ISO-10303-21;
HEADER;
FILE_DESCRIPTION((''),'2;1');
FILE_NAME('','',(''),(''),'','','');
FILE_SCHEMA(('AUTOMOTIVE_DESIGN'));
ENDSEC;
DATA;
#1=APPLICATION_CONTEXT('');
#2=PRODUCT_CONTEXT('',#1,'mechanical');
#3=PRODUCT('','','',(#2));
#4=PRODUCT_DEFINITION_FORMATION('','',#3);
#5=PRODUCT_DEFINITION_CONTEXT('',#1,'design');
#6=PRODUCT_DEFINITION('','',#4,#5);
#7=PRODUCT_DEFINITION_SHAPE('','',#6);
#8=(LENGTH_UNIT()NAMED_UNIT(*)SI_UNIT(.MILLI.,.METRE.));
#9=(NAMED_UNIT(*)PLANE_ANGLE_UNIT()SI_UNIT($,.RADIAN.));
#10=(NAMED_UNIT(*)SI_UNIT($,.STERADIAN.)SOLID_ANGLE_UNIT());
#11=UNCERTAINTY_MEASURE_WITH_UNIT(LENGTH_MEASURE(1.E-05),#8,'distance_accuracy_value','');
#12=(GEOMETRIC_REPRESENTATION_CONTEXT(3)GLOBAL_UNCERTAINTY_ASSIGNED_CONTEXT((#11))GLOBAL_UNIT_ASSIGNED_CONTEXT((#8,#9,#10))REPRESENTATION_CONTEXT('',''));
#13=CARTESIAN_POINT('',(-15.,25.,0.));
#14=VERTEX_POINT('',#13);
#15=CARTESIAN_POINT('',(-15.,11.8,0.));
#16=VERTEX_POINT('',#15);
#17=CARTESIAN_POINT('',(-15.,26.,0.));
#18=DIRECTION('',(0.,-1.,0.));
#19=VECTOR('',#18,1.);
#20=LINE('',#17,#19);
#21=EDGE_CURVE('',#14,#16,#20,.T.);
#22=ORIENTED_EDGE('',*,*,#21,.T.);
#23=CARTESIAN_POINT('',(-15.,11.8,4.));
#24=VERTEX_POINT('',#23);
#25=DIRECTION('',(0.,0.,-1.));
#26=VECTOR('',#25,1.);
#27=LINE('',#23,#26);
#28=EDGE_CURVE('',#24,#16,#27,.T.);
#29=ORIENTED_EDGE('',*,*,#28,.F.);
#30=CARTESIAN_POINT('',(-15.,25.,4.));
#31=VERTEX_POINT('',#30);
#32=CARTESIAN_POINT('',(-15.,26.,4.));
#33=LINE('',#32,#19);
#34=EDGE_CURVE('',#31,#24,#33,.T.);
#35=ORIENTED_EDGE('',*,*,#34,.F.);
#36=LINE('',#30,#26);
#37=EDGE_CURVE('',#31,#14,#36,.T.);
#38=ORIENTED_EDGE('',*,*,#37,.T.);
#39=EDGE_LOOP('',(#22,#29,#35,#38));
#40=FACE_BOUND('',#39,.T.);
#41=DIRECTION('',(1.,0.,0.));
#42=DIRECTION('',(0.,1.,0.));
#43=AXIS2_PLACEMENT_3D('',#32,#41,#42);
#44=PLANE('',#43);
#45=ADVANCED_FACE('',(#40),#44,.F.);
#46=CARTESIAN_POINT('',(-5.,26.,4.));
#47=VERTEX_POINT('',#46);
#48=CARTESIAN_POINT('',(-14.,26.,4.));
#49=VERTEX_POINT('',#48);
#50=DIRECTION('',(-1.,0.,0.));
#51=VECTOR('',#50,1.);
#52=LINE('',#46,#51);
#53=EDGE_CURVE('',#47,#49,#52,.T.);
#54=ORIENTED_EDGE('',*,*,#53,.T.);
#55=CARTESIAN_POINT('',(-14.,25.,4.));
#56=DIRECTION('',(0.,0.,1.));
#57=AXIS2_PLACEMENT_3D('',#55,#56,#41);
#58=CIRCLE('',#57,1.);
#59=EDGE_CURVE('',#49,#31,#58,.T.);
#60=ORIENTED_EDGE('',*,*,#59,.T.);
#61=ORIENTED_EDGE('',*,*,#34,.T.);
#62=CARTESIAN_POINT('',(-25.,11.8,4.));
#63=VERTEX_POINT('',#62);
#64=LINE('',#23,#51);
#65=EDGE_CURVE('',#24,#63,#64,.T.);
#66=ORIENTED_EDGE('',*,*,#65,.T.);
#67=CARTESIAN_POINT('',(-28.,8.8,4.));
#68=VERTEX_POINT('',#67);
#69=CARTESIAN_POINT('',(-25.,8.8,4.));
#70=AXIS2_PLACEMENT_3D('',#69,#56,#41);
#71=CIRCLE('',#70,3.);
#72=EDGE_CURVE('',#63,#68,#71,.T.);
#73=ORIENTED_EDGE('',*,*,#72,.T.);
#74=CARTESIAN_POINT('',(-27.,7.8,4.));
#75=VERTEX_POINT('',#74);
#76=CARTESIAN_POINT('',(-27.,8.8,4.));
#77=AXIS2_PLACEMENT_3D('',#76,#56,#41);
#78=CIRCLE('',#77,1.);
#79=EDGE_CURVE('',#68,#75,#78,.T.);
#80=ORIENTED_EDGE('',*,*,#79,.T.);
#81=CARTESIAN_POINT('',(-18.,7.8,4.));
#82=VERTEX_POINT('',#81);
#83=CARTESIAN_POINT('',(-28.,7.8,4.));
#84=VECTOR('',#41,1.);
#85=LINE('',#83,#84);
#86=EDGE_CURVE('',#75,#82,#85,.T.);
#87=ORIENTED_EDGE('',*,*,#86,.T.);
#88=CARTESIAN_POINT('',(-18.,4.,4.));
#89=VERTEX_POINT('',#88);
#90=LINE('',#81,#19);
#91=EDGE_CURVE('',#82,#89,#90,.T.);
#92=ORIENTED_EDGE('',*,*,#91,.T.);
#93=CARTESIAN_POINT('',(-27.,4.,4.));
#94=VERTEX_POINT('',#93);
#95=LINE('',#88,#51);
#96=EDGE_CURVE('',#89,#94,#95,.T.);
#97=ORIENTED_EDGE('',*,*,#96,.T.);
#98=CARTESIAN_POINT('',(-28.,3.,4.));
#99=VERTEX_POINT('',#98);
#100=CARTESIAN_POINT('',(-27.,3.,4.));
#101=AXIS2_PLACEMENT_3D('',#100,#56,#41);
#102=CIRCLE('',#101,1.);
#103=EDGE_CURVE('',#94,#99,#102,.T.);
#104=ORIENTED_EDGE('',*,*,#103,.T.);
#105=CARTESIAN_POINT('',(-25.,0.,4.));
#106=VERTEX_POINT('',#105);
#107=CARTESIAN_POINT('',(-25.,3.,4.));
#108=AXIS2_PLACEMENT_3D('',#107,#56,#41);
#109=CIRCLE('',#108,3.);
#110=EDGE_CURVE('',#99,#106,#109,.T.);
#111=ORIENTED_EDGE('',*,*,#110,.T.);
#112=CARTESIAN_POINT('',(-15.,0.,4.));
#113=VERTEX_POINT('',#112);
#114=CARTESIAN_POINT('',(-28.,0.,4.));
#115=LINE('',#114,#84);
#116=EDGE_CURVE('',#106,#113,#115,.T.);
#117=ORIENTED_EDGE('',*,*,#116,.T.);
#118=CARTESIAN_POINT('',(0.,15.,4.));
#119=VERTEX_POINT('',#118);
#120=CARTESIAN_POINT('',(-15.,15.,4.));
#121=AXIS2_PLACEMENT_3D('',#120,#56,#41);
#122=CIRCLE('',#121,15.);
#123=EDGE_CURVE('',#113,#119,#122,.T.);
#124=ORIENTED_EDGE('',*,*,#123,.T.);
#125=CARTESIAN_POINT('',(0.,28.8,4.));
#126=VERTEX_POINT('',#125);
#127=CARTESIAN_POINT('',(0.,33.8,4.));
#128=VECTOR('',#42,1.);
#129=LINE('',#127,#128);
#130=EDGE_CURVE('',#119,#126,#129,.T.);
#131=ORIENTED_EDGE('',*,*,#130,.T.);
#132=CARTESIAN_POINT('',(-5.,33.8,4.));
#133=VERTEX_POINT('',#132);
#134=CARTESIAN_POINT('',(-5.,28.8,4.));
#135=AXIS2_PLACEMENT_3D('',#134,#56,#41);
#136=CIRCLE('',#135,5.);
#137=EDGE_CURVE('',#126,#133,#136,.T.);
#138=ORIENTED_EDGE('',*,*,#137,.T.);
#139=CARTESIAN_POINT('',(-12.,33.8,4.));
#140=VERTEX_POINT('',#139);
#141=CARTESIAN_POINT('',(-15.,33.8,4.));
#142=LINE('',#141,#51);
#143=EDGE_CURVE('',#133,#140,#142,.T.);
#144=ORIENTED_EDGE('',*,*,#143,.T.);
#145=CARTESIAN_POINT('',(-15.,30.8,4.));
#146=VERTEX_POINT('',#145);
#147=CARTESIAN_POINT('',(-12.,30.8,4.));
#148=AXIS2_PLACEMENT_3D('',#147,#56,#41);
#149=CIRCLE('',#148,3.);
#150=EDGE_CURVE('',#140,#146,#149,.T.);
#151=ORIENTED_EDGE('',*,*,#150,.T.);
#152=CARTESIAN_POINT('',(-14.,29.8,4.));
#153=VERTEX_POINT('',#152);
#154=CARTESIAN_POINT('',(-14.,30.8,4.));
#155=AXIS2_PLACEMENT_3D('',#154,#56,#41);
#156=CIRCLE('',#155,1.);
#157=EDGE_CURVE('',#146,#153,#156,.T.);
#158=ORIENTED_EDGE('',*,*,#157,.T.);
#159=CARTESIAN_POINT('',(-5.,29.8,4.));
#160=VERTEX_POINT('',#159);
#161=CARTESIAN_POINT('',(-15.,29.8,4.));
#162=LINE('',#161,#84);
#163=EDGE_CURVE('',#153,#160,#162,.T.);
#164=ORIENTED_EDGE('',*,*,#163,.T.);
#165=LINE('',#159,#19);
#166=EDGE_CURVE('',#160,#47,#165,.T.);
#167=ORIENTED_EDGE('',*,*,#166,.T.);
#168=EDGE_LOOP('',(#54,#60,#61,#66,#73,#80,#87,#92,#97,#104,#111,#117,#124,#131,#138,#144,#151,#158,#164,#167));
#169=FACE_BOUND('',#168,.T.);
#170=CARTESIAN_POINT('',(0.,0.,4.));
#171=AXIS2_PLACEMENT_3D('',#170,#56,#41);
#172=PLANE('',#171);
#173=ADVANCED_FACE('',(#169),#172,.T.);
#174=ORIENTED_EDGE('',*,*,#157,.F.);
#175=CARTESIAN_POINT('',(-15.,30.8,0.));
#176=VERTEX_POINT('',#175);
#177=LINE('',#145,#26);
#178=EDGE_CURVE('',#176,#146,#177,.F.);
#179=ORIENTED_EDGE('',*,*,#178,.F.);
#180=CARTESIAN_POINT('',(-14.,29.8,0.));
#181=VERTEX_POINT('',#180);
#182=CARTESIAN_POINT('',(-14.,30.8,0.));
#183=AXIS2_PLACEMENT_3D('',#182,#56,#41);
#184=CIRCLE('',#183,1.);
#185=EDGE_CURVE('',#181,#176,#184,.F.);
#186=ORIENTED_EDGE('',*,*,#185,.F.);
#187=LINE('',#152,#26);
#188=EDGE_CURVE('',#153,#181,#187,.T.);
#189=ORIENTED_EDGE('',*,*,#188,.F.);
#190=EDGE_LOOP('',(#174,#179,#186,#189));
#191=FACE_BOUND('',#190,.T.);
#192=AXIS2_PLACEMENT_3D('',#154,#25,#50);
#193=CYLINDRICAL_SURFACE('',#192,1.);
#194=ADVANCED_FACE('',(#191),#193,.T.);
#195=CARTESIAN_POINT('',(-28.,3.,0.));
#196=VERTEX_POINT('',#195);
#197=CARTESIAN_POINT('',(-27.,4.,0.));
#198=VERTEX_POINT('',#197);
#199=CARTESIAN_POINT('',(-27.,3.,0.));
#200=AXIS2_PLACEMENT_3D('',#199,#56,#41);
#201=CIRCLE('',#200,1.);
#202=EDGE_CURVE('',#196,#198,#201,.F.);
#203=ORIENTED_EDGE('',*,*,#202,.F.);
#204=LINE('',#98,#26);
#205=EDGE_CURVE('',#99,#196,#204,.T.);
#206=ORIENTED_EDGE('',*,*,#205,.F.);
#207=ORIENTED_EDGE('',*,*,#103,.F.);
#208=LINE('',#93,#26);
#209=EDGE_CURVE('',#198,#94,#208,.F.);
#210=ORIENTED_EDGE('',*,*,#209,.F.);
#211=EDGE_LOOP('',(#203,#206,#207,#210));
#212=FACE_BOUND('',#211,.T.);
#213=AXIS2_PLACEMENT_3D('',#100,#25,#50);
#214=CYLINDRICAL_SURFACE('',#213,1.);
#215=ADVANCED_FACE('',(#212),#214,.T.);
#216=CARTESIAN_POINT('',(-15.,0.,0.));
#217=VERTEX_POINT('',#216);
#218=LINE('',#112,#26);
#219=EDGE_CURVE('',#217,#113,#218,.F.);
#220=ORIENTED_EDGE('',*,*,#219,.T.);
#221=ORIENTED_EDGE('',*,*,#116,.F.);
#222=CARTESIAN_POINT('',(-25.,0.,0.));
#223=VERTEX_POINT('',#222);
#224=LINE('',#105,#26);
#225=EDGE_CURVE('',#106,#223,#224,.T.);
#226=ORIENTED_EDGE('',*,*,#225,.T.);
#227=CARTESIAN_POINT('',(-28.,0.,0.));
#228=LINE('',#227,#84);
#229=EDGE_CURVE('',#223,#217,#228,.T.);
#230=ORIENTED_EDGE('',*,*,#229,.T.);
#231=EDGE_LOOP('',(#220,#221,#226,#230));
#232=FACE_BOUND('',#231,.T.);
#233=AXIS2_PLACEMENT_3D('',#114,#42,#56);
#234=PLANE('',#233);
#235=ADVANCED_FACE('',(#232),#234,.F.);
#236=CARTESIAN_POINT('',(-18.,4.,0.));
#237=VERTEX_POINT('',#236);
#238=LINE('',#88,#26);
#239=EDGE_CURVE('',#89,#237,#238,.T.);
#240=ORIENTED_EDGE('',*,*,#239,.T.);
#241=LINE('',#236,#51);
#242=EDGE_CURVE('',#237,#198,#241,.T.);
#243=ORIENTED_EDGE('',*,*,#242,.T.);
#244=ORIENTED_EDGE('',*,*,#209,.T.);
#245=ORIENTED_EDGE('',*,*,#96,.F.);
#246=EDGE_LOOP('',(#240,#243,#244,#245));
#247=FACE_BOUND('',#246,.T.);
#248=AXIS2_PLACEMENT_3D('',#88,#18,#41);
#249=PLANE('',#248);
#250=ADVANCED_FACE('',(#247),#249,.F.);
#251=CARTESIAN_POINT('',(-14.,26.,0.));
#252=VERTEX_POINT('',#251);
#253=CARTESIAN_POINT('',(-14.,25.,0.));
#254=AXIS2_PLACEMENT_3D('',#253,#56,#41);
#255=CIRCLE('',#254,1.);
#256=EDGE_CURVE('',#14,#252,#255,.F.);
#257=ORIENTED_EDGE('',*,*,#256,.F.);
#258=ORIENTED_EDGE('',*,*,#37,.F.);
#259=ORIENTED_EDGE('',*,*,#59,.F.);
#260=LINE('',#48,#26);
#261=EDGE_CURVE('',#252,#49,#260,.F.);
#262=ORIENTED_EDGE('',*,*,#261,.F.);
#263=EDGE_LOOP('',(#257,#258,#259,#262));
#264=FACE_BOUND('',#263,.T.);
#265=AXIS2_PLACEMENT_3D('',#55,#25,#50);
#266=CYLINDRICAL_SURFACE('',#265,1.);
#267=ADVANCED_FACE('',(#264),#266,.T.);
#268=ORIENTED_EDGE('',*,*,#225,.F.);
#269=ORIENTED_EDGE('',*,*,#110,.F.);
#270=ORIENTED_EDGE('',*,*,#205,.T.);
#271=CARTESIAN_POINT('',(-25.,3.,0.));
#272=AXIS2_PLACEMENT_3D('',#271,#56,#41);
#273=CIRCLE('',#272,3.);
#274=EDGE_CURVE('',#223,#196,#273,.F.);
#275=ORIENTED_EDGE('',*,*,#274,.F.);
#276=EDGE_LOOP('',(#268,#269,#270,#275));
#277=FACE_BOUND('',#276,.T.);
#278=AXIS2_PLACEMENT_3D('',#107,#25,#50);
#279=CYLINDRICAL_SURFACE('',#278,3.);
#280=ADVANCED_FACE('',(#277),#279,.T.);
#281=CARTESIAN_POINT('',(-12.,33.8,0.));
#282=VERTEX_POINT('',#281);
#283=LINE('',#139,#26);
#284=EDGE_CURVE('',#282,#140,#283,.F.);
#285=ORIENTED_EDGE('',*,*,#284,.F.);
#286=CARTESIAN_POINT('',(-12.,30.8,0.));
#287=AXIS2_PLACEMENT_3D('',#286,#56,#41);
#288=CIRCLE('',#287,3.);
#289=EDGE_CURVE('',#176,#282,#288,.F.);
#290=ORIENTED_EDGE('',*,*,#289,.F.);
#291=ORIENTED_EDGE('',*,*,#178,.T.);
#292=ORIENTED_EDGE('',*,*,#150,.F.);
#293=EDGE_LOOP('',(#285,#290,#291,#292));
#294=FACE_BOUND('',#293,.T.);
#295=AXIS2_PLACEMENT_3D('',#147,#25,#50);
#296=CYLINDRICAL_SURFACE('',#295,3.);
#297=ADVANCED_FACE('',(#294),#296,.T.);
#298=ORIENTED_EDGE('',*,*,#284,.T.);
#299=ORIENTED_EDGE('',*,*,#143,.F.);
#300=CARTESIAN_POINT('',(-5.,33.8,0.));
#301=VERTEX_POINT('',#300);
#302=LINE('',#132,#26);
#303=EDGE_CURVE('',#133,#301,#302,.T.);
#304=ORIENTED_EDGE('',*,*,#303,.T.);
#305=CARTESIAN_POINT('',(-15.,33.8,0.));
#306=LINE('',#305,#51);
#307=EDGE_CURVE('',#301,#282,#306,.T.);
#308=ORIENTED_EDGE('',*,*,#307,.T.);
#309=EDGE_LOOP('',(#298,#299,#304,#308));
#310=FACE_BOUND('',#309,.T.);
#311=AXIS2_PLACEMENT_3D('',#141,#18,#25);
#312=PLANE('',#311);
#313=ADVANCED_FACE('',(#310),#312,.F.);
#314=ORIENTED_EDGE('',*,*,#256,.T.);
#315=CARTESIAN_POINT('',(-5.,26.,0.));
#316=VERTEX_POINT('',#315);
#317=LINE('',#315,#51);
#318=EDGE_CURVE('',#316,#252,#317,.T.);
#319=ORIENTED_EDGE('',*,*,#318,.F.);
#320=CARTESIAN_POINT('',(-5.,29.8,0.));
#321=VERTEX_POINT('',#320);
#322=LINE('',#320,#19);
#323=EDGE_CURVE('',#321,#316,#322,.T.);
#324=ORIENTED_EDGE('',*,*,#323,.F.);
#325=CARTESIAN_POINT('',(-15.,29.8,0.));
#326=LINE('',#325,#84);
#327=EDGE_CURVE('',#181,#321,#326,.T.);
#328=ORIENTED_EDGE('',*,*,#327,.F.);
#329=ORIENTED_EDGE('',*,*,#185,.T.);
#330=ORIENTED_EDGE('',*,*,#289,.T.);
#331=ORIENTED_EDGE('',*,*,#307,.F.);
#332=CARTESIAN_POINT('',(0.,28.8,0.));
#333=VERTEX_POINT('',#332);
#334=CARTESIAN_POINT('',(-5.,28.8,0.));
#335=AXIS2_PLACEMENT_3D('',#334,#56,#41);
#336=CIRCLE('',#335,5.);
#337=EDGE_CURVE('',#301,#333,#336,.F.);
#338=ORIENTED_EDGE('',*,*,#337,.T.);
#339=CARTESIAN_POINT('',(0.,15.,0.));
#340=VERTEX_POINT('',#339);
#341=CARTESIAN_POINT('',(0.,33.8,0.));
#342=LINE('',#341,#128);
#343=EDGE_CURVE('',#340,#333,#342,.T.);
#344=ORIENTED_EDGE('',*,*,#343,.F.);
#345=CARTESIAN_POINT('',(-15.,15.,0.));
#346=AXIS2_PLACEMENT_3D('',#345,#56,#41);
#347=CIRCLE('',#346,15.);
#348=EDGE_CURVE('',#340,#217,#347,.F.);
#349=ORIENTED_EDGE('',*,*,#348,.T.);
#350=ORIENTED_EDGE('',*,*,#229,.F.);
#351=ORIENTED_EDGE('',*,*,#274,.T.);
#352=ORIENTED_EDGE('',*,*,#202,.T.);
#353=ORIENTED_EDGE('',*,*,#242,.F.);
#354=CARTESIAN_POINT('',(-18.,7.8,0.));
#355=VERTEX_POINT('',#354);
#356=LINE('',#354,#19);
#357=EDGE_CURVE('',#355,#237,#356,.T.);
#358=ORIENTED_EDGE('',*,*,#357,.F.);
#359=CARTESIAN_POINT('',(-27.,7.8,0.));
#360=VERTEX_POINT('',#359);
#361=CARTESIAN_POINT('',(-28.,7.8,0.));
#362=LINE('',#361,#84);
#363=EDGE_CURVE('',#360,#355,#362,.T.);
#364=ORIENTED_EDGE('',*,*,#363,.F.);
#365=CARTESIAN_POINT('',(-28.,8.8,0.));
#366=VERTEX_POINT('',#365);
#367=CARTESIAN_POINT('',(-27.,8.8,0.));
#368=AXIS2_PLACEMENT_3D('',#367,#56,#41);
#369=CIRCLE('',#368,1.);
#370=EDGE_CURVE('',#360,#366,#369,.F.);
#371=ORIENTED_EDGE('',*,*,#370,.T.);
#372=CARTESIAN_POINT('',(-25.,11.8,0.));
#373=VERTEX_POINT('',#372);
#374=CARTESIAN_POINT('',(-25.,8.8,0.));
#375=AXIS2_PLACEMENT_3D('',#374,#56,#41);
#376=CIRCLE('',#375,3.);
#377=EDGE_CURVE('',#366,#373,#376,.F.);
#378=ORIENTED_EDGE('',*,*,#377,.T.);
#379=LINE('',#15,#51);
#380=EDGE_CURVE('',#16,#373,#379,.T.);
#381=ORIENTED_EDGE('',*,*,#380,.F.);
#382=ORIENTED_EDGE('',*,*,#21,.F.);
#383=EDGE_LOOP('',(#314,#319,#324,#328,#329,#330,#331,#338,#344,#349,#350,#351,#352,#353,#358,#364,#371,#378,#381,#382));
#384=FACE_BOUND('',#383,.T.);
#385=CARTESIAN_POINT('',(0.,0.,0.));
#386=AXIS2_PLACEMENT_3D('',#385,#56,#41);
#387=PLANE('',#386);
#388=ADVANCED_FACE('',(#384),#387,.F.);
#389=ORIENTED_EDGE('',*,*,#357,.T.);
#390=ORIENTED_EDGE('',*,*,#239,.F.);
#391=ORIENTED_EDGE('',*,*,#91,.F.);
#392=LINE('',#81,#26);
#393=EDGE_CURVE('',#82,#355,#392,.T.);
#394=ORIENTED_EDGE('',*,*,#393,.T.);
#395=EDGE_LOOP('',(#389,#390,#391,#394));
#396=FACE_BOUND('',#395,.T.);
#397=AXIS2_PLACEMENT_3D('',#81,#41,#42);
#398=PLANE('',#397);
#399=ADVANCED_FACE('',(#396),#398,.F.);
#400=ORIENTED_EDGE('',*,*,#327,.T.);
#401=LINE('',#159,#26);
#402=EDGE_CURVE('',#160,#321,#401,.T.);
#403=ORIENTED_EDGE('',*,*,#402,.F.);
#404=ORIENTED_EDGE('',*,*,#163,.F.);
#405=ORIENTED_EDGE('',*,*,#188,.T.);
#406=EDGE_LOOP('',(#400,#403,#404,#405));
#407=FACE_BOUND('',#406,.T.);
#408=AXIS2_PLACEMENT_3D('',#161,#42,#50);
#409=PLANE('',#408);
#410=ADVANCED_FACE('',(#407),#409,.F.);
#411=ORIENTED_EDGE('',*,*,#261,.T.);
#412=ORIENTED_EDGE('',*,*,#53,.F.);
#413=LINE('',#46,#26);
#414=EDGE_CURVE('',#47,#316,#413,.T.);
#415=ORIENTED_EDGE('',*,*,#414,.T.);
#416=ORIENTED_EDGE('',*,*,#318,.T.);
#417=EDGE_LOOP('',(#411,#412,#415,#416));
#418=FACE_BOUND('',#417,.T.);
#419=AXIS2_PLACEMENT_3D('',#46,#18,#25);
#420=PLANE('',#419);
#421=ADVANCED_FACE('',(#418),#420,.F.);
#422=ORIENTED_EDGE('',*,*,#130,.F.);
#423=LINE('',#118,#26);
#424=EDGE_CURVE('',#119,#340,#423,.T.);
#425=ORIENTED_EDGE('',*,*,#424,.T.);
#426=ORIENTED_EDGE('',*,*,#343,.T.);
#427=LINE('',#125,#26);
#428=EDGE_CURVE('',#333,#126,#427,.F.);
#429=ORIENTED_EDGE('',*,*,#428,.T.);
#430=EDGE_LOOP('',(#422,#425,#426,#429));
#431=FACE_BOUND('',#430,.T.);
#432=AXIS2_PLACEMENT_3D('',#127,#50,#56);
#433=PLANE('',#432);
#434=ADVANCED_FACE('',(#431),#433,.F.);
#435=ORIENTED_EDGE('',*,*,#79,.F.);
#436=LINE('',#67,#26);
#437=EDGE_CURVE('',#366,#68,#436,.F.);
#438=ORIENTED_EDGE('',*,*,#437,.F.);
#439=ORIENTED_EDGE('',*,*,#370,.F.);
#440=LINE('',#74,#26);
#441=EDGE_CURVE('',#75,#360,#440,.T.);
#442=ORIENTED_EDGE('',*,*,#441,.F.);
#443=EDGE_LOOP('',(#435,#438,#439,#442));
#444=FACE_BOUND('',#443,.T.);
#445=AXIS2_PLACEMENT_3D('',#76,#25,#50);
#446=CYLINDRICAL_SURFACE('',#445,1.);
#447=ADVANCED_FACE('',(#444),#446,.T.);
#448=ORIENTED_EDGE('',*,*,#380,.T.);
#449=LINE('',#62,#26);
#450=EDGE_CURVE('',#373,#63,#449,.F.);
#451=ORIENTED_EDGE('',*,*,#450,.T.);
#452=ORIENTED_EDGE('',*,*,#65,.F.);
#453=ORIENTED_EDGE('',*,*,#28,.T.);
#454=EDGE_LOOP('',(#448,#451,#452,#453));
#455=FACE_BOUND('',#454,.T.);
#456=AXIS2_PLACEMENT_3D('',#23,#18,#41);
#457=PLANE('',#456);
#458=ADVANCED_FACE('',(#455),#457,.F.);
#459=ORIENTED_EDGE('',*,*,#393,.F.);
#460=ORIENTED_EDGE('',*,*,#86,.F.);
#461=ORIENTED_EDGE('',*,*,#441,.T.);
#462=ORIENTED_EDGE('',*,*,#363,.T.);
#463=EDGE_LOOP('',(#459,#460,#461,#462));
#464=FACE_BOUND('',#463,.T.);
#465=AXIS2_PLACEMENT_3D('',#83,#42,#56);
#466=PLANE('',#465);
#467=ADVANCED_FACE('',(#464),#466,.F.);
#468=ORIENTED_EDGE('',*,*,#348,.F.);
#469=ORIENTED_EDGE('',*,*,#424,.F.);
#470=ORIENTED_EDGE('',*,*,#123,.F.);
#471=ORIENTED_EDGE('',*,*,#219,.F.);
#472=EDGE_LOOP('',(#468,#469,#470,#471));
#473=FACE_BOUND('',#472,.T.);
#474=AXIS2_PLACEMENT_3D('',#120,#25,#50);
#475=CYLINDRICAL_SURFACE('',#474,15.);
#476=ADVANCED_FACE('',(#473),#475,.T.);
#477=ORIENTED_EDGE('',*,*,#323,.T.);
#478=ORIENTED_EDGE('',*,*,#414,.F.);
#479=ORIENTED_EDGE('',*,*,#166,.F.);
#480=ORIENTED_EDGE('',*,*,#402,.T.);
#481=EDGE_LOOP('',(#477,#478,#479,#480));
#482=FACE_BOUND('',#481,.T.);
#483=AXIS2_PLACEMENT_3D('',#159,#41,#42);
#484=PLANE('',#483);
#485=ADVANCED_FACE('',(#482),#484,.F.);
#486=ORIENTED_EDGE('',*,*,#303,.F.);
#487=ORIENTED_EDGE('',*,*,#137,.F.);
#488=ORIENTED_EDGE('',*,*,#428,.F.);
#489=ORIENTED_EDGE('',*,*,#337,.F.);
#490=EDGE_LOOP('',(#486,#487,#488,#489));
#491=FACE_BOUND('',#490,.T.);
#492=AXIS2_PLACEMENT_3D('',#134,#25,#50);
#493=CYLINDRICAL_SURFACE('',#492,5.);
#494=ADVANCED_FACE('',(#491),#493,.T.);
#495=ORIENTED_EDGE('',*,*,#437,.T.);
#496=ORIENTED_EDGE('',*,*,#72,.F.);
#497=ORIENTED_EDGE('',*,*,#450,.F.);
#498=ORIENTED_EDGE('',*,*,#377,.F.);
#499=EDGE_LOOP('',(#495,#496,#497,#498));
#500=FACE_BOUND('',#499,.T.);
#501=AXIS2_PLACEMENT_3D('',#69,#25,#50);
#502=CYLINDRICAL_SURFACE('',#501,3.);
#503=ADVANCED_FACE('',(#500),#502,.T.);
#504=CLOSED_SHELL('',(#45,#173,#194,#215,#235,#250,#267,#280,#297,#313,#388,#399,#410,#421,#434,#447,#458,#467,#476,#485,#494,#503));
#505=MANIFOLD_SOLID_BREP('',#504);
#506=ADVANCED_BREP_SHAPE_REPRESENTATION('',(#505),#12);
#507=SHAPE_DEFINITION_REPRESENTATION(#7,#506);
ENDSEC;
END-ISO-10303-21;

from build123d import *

# Parameters (mm, degrees)
ESTRUSIONE_ESTRUSIONE1_DEPTH = 4
RACCORDO1_R                  = 1
RACCORDO2_R                  = 3
RACCORDO3_R                  = 5
RACCORDO4_R                  = 15


with BuildPart() as part:
    # Schizzo1 → Estrusione-Estrusione1 (new body)
    with BuildSketch(Plane.XY):
        Polygon((-15, 33.8), (0, 33.8), (0, 0), (-28, 0), (-28, 4), (-18, 4), (-18, 7.8), (-28, 7.8), (-28, 11.8), (-15, 11.8), (-15, 26), (-5, 26), (-5, 29.8), (-15, 29.8), align=None)
    extrude(amount=ESTRUSIONE_ESTRUSIONE1_DEPTH)

    # Raccordo1
    raccordo1_edges = [part.edges().sort_by_distance(p)[0] for p in [
        (-28, 4, 2),
        (-28, 7.8, 2),
        (-15, 26, 2),
        (-15, 29.8, 2),
    ]]
    fillet(raccordo1_edges, radius=RACCORDO1_R)

    # Raccordo2
    raccordo2_edges = [part.edges().sort_by_distance(p)[0] for p in [
        (-28, 0, 2),
        (-28, 11.8, 2),
        (-15, 33.8, 2),
    ]]
    fillet(raccordo2_edges, radius=RACCORDO2_R - 0.0001)  # a hair under: the kernel refuses the full size

    # Raccordo3
    raccordo3_edges = [part.edges().sort_by_distance(p)[0] for p in [
        (0, 33.8, 2),
    ]]
    fillet(raccordo3_edges, radius=RACCORDO3_R)

    # Raccordo4
    raccordo4_edges = [part.edges().sort_by_distance(p)[0] for p in [
        (0, 0, 2),
    ]]
    fillet(raccordo4_edges, radius=RACCORDO4_R)


solid = part.part
